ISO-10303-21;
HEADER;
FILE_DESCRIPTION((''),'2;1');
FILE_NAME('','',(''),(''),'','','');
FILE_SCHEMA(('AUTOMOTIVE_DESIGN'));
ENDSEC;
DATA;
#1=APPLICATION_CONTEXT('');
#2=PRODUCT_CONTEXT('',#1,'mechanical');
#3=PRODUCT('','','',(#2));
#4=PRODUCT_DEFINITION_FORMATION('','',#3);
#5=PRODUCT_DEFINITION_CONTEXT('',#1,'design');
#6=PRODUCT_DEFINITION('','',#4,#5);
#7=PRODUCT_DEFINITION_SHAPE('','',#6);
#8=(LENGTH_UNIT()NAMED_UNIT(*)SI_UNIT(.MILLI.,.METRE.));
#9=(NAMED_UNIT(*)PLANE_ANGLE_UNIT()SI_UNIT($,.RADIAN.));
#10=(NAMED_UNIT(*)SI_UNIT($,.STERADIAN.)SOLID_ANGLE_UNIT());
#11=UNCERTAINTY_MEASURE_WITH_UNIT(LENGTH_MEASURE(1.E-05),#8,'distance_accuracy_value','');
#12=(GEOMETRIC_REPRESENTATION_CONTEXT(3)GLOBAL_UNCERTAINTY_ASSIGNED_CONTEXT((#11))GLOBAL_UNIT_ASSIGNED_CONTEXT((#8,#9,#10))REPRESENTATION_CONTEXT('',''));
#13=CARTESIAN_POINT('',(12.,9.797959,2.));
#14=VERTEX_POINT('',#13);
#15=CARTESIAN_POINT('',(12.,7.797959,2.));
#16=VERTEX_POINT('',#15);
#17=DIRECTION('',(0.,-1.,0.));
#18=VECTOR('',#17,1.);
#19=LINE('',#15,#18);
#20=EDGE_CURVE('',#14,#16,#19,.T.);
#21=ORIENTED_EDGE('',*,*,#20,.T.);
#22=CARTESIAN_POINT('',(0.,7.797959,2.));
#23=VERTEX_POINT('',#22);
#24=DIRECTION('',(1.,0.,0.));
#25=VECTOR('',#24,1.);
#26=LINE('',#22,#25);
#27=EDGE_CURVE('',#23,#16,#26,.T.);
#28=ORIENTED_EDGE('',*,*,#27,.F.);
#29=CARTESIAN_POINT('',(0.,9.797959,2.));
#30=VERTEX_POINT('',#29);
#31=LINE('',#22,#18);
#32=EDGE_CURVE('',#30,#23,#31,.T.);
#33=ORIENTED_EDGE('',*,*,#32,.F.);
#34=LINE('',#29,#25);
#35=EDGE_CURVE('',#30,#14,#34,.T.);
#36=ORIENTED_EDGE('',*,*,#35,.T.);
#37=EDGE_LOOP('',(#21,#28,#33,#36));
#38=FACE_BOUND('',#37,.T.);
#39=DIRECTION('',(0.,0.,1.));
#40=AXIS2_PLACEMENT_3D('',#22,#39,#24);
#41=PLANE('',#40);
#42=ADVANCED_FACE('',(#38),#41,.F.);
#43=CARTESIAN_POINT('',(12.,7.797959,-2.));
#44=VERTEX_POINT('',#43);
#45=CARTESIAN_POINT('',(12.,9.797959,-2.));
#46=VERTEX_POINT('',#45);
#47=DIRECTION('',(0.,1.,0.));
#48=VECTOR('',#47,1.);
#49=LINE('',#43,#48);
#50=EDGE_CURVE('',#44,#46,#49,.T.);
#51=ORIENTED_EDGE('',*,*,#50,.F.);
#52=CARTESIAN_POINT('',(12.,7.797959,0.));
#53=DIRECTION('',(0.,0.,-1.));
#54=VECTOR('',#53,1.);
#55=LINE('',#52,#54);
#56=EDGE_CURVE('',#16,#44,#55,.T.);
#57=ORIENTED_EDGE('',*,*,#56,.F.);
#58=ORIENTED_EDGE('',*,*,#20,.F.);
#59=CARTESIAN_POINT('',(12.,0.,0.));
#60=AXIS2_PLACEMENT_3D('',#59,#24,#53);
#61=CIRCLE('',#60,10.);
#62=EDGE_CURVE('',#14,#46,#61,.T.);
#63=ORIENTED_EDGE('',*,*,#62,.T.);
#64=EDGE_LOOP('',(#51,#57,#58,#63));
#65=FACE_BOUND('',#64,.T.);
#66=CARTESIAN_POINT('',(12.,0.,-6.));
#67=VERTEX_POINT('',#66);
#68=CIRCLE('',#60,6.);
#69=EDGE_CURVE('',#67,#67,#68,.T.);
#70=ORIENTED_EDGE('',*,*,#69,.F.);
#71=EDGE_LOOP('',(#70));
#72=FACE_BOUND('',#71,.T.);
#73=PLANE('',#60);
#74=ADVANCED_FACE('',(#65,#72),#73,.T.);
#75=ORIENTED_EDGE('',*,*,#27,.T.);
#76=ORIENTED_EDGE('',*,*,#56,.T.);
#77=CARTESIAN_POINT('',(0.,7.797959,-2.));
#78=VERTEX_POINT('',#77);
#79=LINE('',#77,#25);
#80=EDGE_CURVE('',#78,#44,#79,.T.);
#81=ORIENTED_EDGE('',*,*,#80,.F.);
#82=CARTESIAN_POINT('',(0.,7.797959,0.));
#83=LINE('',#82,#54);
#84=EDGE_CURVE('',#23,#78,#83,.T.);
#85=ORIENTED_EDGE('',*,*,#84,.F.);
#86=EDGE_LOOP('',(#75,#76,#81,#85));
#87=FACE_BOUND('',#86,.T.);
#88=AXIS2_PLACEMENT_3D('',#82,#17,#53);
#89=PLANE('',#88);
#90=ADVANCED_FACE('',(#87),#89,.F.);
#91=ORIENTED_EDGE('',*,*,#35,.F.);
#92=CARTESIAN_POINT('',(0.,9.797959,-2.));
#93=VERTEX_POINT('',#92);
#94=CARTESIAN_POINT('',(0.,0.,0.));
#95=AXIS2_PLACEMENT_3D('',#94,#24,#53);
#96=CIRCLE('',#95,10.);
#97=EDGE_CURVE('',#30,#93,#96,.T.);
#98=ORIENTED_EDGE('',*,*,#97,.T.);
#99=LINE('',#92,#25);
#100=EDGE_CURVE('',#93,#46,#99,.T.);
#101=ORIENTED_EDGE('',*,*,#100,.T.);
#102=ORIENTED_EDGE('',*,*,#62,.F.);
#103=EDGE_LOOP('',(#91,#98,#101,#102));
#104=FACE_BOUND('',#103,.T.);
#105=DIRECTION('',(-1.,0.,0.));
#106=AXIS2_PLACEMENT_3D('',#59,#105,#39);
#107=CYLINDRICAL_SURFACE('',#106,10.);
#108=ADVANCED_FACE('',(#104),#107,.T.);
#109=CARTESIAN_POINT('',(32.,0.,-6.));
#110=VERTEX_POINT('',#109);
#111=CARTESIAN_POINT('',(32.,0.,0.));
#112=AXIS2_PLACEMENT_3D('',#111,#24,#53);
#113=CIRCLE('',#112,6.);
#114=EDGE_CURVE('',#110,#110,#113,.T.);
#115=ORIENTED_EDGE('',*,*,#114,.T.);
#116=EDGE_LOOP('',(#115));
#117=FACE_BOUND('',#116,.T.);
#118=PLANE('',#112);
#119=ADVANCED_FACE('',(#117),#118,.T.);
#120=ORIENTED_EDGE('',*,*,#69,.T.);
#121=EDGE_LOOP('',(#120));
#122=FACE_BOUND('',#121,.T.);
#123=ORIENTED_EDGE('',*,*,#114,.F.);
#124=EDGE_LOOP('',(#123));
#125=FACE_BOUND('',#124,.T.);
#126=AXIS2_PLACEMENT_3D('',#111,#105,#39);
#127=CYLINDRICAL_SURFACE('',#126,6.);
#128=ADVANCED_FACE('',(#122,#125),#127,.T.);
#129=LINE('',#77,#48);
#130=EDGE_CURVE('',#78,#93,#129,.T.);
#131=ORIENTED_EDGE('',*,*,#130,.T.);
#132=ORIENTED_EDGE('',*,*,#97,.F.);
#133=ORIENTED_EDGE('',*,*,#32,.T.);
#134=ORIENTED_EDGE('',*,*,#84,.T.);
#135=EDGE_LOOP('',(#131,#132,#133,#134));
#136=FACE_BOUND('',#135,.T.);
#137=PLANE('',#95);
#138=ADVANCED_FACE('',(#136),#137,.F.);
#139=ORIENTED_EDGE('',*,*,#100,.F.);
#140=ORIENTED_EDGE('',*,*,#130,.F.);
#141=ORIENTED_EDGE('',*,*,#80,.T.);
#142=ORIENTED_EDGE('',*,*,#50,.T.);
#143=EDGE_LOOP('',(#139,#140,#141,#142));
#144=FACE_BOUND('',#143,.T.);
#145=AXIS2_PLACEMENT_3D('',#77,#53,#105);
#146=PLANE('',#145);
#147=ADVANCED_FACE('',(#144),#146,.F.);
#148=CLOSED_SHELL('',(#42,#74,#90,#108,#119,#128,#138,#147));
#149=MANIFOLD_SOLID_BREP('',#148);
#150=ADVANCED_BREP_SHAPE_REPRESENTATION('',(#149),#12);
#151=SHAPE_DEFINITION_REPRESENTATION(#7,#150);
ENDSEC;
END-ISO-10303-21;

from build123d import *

# Parameters (mm, degrees)
BOSS_EXTRUDE1_OUTLINE_R = 10
BOSS_EXTRUDE1_DEPTH     = 12
SKETCH5_R               = 6
BOSS_EXTRUDE2_DEPTH     = 20
CUT_EXTRUDE1_DEPTH      = 25.494897428


# Read off the part's stored shape, not the designer's step: Boss-Extrude1
with BuildPart() as part:
    # Boss-Extrude1 outline → Boss-Extrude1 (new body)
    with BuildSketch(Plane(origin=(0, 0, 0), x_dir=(0, 0, -1), z_dir=(1, 0, 0))):
        Circle(BOSS_EXTRUDE1_OUTLINE_R)
    extrude(amount=BOSS_EXTRUDE1_DEPTH)

    # Sketch5 → Boss-Extrude2 (add)
    with BuildSketch(Plane(origin=(12, 0, 0), x_dir=(0, 0, -1), z_dir=(1, 0, 0))):
        Circle(SKETCH5_R)
    extrude(amount=BOSS_EXTRUDE2_DEPTH)

    # Sketch7 → Cut-Extrude1 (cut, through all)
    with BuildSketch(Plane(origin=(12, 0, 0), x_dir=(0, 0, -1), z_dir=(1, 0, 0))):
        with BuildLine():
            Line((0, 7.797958971), (2, 7.797958971))
            Line((2, 7.797958971), (2, 9.797958971))
            ThreePointArc((2, 9.797958971), (0, 10), (-2, 9.797958971))
            Line((-2, 9.797958971), (-2, 7.797958971))
            Line((-2, 7.797958971), (0, 7.797958971))
        make_face()
    extrude(amount=-CUT_EXTRUDE1_DEPTH, mode=Mode.SUBTRACT)


solid = part.part
